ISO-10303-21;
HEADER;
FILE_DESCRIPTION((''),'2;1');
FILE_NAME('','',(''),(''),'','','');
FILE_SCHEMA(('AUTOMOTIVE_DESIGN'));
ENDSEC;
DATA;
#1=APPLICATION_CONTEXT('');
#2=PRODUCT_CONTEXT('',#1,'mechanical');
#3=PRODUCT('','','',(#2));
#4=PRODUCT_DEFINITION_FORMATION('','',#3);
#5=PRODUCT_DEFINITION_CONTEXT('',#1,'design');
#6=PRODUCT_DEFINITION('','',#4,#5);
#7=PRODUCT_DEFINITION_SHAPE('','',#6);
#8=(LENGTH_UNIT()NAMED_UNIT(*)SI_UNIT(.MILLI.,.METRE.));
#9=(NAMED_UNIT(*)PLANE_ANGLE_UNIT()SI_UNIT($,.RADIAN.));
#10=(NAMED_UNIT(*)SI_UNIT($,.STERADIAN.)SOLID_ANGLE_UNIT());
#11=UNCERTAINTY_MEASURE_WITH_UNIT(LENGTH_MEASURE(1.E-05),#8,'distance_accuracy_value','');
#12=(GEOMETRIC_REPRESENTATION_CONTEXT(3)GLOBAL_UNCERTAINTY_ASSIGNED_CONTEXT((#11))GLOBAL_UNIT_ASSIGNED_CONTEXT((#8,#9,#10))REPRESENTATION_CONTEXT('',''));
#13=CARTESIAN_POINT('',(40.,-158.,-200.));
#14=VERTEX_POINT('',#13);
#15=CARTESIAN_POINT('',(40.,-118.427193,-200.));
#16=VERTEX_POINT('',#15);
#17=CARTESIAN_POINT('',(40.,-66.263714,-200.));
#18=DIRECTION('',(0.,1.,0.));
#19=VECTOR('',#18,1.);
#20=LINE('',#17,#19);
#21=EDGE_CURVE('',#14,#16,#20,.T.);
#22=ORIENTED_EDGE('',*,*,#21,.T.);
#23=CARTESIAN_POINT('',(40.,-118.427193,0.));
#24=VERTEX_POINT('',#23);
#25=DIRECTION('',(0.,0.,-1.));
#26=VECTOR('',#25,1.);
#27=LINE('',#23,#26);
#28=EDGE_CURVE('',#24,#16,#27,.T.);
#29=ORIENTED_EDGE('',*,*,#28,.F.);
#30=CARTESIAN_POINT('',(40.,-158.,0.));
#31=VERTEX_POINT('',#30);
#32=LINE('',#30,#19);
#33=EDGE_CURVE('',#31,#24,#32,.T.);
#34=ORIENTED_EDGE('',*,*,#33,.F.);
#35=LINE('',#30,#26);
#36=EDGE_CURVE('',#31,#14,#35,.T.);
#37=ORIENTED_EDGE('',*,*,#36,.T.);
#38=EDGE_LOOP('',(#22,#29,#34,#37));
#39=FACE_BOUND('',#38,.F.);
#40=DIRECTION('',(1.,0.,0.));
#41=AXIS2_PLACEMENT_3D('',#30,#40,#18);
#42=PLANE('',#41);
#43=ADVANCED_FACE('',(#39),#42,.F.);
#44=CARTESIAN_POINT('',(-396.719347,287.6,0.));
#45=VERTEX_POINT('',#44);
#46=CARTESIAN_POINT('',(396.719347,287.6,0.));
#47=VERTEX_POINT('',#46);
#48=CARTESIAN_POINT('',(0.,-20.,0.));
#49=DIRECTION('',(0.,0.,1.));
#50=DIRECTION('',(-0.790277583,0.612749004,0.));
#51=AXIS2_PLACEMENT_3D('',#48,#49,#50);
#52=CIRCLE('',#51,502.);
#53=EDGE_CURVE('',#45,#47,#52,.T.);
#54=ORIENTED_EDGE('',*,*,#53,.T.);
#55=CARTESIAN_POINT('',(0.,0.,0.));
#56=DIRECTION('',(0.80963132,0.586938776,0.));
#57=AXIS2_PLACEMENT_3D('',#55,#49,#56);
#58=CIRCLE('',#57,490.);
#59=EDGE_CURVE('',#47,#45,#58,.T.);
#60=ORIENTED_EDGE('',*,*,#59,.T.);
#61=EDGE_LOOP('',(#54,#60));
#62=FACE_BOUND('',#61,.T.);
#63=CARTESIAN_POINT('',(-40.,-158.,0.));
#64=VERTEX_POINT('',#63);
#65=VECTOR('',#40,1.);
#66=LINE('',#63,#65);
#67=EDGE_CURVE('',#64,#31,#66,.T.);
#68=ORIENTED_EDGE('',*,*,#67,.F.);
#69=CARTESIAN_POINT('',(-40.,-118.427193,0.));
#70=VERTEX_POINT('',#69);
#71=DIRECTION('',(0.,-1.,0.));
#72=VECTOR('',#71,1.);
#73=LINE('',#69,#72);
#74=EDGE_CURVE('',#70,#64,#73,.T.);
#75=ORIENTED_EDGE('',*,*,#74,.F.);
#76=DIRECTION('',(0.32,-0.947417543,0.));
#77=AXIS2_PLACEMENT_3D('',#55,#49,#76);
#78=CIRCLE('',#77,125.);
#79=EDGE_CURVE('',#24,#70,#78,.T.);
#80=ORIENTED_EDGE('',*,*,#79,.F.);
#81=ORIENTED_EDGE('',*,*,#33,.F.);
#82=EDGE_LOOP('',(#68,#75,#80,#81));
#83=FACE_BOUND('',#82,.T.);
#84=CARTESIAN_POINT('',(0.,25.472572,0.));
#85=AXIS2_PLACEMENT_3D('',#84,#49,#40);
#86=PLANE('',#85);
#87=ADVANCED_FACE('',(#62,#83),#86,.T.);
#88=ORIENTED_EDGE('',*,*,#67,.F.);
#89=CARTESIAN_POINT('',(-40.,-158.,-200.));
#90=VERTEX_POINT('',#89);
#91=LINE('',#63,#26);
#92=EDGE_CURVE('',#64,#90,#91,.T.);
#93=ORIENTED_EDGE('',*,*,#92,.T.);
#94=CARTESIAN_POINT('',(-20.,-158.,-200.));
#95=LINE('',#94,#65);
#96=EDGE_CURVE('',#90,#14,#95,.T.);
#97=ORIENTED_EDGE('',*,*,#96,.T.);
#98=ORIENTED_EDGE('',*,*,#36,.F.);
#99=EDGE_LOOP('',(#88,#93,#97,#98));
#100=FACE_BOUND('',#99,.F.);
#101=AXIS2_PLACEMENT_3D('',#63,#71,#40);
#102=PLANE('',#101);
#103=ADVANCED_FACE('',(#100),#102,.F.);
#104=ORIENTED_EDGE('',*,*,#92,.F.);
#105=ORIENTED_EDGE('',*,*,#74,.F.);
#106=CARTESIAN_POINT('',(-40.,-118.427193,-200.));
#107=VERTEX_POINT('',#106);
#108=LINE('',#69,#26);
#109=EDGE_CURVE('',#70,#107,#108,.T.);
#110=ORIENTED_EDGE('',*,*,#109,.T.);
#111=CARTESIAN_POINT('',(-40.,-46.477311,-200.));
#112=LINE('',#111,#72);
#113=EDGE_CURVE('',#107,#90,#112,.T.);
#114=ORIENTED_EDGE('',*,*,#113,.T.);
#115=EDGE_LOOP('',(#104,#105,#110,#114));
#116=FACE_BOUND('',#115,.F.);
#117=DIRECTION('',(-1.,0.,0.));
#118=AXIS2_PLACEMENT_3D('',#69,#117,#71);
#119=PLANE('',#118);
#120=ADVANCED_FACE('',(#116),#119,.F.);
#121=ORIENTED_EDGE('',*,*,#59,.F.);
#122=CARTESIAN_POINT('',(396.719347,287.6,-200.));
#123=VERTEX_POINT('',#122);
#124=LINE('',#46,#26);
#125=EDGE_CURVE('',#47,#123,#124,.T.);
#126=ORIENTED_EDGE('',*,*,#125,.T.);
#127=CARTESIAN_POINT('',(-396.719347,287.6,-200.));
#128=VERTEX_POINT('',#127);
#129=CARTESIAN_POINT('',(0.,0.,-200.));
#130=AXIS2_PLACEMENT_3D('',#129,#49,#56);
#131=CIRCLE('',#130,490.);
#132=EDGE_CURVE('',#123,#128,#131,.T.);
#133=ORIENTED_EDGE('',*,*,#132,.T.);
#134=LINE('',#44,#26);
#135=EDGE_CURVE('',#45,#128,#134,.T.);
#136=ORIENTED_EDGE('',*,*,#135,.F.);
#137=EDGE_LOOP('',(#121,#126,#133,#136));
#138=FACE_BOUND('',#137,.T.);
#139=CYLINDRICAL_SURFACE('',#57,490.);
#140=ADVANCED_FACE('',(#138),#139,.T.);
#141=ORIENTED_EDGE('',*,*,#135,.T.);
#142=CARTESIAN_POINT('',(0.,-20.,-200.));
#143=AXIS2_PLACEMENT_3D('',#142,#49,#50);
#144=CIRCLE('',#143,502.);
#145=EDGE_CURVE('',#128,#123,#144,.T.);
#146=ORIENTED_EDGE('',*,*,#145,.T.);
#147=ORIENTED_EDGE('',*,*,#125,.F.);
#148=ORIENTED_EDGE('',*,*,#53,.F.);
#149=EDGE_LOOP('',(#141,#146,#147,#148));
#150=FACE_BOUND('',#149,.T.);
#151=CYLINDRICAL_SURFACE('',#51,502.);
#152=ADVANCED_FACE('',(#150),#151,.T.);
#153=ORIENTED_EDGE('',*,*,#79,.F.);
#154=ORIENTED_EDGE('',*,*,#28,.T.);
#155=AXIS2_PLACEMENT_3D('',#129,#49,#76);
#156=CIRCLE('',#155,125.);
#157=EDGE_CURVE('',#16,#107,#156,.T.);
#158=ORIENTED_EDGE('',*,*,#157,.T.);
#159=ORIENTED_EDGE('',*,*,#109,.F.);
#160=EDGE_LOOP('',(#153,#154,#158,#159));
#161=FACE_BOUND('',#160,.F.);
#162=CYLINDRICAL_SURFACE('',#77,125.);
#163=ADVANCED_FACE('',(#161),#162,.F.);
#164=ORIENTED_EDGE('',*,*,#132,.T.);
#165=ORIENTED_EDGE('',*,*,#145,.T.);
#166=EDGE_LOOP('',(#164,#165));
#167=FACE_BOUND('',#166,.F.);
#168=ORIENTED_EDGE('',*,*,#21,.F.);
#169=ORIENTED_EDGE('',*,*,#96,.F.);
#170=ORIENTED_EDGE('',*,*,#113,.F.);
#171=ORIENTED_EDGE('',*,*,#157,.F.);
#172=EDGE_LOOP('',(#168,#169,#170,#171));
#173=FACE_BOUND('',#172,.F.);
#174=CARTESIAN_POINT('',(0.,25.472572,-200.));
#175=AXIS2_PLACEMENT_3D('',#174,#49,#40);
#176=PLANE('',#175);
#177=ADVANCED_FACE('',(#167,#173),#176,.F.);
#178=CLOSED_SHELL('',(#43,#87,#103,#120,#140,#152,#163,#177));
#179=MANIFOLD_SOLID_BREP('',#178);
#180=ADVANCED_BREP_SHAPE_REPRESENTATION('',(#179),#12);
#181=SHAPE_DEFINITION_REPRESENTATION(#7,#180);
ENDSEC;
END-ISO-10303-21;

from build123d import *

# Parameters (mm, degrees)
F1_DEPTH = 200
F3_DEPTH = 469.9


# Not quite as in the source:
# - a feature names something its author has since deleted; it is built from what else it names


with BuildPart() as f1:
    # F0 (on Top) → F1 (new body)
    with BuildSketch(Plane.XY):
        with BuildLine():
            ThreePointArc((-396.7193466419, 287.6), (-151.1746012819, -466.0968138995), (490, 0))
            ThreePointArc((490, 0), (466.0968138995, 151.1746012818), (396.7193466419, 287.6))
            ThreePointArc((396.7193466419, 287.6), (0, 482), (-396.7193466419, 287.6))
        make_face()
        with BuildLine():
            ThreePointArc((396.7193466419, 287.6), (466.0968138995, 151.1746012818), (490, 0))
            ThreePointArc((490, 0), (-151.1746012819, -466.0968138995), (-396.7193466419, 287.6))
            ThreePointArc((-396.7193466419, 287.6), (-162.5590477115, -494.9511090703), (502, -20))
            ThreePointArc((502, -20), (474.9511090703, 142.5590477115), (396.7193466419, 287.6))
        make_face()
        with BuildLine():
            ThreePointArc((-396.7193466419, 287.6), (0, 482), (396.7193466419, 287.6))
            ThreePointArc((396.7193466419, 287.6), (0, 490), (-396.7193466419, 287.6))
        make_face()
    extrude(amount=-F1_DEPTH)

    # F2 (on Top) → F3 (cut)
    with BuildSketch(Plane.XY):
        with BuildLine():
            ThreePointArc((40, -118.4271928233), (101.5504800579, -72.8868986856), (125, 0))
            ThreePointArc((125, 0), (-72.8868986856, 101.5504800579), (-40, -118.4271928233))
            Line((-40, -118.4271928233), (-40, 0))
            Line((-40, 0), (40, 0))
            Line((40, 0), (40, -118.4271928233))
        make_face()
        with BuildLine():
            Line((-40, 0), (-40, -118.4271928233))
            ThreePointArc((-40, -118.4271928233), (0, -125), (40, -118.4271928233))
            Line((40, -118.4271928233), (40, 0))
            Line((40, 0), (-40, 0))
        make_face()
        with BuildLine():
            ThreePointArc((40, -118.4271928233), (0, -125), (-40, -118.4271928233))
            Line((-40, -118.4271928233), (-40, -158))
            Line((-40, -158), (40, -158))
            Line((40, -158), (40, -118.4271928233))
        make_face()
    extrude(amount=-F3_DEPTH, mode=Mode.SUBTRACT)


solid = f1.part
